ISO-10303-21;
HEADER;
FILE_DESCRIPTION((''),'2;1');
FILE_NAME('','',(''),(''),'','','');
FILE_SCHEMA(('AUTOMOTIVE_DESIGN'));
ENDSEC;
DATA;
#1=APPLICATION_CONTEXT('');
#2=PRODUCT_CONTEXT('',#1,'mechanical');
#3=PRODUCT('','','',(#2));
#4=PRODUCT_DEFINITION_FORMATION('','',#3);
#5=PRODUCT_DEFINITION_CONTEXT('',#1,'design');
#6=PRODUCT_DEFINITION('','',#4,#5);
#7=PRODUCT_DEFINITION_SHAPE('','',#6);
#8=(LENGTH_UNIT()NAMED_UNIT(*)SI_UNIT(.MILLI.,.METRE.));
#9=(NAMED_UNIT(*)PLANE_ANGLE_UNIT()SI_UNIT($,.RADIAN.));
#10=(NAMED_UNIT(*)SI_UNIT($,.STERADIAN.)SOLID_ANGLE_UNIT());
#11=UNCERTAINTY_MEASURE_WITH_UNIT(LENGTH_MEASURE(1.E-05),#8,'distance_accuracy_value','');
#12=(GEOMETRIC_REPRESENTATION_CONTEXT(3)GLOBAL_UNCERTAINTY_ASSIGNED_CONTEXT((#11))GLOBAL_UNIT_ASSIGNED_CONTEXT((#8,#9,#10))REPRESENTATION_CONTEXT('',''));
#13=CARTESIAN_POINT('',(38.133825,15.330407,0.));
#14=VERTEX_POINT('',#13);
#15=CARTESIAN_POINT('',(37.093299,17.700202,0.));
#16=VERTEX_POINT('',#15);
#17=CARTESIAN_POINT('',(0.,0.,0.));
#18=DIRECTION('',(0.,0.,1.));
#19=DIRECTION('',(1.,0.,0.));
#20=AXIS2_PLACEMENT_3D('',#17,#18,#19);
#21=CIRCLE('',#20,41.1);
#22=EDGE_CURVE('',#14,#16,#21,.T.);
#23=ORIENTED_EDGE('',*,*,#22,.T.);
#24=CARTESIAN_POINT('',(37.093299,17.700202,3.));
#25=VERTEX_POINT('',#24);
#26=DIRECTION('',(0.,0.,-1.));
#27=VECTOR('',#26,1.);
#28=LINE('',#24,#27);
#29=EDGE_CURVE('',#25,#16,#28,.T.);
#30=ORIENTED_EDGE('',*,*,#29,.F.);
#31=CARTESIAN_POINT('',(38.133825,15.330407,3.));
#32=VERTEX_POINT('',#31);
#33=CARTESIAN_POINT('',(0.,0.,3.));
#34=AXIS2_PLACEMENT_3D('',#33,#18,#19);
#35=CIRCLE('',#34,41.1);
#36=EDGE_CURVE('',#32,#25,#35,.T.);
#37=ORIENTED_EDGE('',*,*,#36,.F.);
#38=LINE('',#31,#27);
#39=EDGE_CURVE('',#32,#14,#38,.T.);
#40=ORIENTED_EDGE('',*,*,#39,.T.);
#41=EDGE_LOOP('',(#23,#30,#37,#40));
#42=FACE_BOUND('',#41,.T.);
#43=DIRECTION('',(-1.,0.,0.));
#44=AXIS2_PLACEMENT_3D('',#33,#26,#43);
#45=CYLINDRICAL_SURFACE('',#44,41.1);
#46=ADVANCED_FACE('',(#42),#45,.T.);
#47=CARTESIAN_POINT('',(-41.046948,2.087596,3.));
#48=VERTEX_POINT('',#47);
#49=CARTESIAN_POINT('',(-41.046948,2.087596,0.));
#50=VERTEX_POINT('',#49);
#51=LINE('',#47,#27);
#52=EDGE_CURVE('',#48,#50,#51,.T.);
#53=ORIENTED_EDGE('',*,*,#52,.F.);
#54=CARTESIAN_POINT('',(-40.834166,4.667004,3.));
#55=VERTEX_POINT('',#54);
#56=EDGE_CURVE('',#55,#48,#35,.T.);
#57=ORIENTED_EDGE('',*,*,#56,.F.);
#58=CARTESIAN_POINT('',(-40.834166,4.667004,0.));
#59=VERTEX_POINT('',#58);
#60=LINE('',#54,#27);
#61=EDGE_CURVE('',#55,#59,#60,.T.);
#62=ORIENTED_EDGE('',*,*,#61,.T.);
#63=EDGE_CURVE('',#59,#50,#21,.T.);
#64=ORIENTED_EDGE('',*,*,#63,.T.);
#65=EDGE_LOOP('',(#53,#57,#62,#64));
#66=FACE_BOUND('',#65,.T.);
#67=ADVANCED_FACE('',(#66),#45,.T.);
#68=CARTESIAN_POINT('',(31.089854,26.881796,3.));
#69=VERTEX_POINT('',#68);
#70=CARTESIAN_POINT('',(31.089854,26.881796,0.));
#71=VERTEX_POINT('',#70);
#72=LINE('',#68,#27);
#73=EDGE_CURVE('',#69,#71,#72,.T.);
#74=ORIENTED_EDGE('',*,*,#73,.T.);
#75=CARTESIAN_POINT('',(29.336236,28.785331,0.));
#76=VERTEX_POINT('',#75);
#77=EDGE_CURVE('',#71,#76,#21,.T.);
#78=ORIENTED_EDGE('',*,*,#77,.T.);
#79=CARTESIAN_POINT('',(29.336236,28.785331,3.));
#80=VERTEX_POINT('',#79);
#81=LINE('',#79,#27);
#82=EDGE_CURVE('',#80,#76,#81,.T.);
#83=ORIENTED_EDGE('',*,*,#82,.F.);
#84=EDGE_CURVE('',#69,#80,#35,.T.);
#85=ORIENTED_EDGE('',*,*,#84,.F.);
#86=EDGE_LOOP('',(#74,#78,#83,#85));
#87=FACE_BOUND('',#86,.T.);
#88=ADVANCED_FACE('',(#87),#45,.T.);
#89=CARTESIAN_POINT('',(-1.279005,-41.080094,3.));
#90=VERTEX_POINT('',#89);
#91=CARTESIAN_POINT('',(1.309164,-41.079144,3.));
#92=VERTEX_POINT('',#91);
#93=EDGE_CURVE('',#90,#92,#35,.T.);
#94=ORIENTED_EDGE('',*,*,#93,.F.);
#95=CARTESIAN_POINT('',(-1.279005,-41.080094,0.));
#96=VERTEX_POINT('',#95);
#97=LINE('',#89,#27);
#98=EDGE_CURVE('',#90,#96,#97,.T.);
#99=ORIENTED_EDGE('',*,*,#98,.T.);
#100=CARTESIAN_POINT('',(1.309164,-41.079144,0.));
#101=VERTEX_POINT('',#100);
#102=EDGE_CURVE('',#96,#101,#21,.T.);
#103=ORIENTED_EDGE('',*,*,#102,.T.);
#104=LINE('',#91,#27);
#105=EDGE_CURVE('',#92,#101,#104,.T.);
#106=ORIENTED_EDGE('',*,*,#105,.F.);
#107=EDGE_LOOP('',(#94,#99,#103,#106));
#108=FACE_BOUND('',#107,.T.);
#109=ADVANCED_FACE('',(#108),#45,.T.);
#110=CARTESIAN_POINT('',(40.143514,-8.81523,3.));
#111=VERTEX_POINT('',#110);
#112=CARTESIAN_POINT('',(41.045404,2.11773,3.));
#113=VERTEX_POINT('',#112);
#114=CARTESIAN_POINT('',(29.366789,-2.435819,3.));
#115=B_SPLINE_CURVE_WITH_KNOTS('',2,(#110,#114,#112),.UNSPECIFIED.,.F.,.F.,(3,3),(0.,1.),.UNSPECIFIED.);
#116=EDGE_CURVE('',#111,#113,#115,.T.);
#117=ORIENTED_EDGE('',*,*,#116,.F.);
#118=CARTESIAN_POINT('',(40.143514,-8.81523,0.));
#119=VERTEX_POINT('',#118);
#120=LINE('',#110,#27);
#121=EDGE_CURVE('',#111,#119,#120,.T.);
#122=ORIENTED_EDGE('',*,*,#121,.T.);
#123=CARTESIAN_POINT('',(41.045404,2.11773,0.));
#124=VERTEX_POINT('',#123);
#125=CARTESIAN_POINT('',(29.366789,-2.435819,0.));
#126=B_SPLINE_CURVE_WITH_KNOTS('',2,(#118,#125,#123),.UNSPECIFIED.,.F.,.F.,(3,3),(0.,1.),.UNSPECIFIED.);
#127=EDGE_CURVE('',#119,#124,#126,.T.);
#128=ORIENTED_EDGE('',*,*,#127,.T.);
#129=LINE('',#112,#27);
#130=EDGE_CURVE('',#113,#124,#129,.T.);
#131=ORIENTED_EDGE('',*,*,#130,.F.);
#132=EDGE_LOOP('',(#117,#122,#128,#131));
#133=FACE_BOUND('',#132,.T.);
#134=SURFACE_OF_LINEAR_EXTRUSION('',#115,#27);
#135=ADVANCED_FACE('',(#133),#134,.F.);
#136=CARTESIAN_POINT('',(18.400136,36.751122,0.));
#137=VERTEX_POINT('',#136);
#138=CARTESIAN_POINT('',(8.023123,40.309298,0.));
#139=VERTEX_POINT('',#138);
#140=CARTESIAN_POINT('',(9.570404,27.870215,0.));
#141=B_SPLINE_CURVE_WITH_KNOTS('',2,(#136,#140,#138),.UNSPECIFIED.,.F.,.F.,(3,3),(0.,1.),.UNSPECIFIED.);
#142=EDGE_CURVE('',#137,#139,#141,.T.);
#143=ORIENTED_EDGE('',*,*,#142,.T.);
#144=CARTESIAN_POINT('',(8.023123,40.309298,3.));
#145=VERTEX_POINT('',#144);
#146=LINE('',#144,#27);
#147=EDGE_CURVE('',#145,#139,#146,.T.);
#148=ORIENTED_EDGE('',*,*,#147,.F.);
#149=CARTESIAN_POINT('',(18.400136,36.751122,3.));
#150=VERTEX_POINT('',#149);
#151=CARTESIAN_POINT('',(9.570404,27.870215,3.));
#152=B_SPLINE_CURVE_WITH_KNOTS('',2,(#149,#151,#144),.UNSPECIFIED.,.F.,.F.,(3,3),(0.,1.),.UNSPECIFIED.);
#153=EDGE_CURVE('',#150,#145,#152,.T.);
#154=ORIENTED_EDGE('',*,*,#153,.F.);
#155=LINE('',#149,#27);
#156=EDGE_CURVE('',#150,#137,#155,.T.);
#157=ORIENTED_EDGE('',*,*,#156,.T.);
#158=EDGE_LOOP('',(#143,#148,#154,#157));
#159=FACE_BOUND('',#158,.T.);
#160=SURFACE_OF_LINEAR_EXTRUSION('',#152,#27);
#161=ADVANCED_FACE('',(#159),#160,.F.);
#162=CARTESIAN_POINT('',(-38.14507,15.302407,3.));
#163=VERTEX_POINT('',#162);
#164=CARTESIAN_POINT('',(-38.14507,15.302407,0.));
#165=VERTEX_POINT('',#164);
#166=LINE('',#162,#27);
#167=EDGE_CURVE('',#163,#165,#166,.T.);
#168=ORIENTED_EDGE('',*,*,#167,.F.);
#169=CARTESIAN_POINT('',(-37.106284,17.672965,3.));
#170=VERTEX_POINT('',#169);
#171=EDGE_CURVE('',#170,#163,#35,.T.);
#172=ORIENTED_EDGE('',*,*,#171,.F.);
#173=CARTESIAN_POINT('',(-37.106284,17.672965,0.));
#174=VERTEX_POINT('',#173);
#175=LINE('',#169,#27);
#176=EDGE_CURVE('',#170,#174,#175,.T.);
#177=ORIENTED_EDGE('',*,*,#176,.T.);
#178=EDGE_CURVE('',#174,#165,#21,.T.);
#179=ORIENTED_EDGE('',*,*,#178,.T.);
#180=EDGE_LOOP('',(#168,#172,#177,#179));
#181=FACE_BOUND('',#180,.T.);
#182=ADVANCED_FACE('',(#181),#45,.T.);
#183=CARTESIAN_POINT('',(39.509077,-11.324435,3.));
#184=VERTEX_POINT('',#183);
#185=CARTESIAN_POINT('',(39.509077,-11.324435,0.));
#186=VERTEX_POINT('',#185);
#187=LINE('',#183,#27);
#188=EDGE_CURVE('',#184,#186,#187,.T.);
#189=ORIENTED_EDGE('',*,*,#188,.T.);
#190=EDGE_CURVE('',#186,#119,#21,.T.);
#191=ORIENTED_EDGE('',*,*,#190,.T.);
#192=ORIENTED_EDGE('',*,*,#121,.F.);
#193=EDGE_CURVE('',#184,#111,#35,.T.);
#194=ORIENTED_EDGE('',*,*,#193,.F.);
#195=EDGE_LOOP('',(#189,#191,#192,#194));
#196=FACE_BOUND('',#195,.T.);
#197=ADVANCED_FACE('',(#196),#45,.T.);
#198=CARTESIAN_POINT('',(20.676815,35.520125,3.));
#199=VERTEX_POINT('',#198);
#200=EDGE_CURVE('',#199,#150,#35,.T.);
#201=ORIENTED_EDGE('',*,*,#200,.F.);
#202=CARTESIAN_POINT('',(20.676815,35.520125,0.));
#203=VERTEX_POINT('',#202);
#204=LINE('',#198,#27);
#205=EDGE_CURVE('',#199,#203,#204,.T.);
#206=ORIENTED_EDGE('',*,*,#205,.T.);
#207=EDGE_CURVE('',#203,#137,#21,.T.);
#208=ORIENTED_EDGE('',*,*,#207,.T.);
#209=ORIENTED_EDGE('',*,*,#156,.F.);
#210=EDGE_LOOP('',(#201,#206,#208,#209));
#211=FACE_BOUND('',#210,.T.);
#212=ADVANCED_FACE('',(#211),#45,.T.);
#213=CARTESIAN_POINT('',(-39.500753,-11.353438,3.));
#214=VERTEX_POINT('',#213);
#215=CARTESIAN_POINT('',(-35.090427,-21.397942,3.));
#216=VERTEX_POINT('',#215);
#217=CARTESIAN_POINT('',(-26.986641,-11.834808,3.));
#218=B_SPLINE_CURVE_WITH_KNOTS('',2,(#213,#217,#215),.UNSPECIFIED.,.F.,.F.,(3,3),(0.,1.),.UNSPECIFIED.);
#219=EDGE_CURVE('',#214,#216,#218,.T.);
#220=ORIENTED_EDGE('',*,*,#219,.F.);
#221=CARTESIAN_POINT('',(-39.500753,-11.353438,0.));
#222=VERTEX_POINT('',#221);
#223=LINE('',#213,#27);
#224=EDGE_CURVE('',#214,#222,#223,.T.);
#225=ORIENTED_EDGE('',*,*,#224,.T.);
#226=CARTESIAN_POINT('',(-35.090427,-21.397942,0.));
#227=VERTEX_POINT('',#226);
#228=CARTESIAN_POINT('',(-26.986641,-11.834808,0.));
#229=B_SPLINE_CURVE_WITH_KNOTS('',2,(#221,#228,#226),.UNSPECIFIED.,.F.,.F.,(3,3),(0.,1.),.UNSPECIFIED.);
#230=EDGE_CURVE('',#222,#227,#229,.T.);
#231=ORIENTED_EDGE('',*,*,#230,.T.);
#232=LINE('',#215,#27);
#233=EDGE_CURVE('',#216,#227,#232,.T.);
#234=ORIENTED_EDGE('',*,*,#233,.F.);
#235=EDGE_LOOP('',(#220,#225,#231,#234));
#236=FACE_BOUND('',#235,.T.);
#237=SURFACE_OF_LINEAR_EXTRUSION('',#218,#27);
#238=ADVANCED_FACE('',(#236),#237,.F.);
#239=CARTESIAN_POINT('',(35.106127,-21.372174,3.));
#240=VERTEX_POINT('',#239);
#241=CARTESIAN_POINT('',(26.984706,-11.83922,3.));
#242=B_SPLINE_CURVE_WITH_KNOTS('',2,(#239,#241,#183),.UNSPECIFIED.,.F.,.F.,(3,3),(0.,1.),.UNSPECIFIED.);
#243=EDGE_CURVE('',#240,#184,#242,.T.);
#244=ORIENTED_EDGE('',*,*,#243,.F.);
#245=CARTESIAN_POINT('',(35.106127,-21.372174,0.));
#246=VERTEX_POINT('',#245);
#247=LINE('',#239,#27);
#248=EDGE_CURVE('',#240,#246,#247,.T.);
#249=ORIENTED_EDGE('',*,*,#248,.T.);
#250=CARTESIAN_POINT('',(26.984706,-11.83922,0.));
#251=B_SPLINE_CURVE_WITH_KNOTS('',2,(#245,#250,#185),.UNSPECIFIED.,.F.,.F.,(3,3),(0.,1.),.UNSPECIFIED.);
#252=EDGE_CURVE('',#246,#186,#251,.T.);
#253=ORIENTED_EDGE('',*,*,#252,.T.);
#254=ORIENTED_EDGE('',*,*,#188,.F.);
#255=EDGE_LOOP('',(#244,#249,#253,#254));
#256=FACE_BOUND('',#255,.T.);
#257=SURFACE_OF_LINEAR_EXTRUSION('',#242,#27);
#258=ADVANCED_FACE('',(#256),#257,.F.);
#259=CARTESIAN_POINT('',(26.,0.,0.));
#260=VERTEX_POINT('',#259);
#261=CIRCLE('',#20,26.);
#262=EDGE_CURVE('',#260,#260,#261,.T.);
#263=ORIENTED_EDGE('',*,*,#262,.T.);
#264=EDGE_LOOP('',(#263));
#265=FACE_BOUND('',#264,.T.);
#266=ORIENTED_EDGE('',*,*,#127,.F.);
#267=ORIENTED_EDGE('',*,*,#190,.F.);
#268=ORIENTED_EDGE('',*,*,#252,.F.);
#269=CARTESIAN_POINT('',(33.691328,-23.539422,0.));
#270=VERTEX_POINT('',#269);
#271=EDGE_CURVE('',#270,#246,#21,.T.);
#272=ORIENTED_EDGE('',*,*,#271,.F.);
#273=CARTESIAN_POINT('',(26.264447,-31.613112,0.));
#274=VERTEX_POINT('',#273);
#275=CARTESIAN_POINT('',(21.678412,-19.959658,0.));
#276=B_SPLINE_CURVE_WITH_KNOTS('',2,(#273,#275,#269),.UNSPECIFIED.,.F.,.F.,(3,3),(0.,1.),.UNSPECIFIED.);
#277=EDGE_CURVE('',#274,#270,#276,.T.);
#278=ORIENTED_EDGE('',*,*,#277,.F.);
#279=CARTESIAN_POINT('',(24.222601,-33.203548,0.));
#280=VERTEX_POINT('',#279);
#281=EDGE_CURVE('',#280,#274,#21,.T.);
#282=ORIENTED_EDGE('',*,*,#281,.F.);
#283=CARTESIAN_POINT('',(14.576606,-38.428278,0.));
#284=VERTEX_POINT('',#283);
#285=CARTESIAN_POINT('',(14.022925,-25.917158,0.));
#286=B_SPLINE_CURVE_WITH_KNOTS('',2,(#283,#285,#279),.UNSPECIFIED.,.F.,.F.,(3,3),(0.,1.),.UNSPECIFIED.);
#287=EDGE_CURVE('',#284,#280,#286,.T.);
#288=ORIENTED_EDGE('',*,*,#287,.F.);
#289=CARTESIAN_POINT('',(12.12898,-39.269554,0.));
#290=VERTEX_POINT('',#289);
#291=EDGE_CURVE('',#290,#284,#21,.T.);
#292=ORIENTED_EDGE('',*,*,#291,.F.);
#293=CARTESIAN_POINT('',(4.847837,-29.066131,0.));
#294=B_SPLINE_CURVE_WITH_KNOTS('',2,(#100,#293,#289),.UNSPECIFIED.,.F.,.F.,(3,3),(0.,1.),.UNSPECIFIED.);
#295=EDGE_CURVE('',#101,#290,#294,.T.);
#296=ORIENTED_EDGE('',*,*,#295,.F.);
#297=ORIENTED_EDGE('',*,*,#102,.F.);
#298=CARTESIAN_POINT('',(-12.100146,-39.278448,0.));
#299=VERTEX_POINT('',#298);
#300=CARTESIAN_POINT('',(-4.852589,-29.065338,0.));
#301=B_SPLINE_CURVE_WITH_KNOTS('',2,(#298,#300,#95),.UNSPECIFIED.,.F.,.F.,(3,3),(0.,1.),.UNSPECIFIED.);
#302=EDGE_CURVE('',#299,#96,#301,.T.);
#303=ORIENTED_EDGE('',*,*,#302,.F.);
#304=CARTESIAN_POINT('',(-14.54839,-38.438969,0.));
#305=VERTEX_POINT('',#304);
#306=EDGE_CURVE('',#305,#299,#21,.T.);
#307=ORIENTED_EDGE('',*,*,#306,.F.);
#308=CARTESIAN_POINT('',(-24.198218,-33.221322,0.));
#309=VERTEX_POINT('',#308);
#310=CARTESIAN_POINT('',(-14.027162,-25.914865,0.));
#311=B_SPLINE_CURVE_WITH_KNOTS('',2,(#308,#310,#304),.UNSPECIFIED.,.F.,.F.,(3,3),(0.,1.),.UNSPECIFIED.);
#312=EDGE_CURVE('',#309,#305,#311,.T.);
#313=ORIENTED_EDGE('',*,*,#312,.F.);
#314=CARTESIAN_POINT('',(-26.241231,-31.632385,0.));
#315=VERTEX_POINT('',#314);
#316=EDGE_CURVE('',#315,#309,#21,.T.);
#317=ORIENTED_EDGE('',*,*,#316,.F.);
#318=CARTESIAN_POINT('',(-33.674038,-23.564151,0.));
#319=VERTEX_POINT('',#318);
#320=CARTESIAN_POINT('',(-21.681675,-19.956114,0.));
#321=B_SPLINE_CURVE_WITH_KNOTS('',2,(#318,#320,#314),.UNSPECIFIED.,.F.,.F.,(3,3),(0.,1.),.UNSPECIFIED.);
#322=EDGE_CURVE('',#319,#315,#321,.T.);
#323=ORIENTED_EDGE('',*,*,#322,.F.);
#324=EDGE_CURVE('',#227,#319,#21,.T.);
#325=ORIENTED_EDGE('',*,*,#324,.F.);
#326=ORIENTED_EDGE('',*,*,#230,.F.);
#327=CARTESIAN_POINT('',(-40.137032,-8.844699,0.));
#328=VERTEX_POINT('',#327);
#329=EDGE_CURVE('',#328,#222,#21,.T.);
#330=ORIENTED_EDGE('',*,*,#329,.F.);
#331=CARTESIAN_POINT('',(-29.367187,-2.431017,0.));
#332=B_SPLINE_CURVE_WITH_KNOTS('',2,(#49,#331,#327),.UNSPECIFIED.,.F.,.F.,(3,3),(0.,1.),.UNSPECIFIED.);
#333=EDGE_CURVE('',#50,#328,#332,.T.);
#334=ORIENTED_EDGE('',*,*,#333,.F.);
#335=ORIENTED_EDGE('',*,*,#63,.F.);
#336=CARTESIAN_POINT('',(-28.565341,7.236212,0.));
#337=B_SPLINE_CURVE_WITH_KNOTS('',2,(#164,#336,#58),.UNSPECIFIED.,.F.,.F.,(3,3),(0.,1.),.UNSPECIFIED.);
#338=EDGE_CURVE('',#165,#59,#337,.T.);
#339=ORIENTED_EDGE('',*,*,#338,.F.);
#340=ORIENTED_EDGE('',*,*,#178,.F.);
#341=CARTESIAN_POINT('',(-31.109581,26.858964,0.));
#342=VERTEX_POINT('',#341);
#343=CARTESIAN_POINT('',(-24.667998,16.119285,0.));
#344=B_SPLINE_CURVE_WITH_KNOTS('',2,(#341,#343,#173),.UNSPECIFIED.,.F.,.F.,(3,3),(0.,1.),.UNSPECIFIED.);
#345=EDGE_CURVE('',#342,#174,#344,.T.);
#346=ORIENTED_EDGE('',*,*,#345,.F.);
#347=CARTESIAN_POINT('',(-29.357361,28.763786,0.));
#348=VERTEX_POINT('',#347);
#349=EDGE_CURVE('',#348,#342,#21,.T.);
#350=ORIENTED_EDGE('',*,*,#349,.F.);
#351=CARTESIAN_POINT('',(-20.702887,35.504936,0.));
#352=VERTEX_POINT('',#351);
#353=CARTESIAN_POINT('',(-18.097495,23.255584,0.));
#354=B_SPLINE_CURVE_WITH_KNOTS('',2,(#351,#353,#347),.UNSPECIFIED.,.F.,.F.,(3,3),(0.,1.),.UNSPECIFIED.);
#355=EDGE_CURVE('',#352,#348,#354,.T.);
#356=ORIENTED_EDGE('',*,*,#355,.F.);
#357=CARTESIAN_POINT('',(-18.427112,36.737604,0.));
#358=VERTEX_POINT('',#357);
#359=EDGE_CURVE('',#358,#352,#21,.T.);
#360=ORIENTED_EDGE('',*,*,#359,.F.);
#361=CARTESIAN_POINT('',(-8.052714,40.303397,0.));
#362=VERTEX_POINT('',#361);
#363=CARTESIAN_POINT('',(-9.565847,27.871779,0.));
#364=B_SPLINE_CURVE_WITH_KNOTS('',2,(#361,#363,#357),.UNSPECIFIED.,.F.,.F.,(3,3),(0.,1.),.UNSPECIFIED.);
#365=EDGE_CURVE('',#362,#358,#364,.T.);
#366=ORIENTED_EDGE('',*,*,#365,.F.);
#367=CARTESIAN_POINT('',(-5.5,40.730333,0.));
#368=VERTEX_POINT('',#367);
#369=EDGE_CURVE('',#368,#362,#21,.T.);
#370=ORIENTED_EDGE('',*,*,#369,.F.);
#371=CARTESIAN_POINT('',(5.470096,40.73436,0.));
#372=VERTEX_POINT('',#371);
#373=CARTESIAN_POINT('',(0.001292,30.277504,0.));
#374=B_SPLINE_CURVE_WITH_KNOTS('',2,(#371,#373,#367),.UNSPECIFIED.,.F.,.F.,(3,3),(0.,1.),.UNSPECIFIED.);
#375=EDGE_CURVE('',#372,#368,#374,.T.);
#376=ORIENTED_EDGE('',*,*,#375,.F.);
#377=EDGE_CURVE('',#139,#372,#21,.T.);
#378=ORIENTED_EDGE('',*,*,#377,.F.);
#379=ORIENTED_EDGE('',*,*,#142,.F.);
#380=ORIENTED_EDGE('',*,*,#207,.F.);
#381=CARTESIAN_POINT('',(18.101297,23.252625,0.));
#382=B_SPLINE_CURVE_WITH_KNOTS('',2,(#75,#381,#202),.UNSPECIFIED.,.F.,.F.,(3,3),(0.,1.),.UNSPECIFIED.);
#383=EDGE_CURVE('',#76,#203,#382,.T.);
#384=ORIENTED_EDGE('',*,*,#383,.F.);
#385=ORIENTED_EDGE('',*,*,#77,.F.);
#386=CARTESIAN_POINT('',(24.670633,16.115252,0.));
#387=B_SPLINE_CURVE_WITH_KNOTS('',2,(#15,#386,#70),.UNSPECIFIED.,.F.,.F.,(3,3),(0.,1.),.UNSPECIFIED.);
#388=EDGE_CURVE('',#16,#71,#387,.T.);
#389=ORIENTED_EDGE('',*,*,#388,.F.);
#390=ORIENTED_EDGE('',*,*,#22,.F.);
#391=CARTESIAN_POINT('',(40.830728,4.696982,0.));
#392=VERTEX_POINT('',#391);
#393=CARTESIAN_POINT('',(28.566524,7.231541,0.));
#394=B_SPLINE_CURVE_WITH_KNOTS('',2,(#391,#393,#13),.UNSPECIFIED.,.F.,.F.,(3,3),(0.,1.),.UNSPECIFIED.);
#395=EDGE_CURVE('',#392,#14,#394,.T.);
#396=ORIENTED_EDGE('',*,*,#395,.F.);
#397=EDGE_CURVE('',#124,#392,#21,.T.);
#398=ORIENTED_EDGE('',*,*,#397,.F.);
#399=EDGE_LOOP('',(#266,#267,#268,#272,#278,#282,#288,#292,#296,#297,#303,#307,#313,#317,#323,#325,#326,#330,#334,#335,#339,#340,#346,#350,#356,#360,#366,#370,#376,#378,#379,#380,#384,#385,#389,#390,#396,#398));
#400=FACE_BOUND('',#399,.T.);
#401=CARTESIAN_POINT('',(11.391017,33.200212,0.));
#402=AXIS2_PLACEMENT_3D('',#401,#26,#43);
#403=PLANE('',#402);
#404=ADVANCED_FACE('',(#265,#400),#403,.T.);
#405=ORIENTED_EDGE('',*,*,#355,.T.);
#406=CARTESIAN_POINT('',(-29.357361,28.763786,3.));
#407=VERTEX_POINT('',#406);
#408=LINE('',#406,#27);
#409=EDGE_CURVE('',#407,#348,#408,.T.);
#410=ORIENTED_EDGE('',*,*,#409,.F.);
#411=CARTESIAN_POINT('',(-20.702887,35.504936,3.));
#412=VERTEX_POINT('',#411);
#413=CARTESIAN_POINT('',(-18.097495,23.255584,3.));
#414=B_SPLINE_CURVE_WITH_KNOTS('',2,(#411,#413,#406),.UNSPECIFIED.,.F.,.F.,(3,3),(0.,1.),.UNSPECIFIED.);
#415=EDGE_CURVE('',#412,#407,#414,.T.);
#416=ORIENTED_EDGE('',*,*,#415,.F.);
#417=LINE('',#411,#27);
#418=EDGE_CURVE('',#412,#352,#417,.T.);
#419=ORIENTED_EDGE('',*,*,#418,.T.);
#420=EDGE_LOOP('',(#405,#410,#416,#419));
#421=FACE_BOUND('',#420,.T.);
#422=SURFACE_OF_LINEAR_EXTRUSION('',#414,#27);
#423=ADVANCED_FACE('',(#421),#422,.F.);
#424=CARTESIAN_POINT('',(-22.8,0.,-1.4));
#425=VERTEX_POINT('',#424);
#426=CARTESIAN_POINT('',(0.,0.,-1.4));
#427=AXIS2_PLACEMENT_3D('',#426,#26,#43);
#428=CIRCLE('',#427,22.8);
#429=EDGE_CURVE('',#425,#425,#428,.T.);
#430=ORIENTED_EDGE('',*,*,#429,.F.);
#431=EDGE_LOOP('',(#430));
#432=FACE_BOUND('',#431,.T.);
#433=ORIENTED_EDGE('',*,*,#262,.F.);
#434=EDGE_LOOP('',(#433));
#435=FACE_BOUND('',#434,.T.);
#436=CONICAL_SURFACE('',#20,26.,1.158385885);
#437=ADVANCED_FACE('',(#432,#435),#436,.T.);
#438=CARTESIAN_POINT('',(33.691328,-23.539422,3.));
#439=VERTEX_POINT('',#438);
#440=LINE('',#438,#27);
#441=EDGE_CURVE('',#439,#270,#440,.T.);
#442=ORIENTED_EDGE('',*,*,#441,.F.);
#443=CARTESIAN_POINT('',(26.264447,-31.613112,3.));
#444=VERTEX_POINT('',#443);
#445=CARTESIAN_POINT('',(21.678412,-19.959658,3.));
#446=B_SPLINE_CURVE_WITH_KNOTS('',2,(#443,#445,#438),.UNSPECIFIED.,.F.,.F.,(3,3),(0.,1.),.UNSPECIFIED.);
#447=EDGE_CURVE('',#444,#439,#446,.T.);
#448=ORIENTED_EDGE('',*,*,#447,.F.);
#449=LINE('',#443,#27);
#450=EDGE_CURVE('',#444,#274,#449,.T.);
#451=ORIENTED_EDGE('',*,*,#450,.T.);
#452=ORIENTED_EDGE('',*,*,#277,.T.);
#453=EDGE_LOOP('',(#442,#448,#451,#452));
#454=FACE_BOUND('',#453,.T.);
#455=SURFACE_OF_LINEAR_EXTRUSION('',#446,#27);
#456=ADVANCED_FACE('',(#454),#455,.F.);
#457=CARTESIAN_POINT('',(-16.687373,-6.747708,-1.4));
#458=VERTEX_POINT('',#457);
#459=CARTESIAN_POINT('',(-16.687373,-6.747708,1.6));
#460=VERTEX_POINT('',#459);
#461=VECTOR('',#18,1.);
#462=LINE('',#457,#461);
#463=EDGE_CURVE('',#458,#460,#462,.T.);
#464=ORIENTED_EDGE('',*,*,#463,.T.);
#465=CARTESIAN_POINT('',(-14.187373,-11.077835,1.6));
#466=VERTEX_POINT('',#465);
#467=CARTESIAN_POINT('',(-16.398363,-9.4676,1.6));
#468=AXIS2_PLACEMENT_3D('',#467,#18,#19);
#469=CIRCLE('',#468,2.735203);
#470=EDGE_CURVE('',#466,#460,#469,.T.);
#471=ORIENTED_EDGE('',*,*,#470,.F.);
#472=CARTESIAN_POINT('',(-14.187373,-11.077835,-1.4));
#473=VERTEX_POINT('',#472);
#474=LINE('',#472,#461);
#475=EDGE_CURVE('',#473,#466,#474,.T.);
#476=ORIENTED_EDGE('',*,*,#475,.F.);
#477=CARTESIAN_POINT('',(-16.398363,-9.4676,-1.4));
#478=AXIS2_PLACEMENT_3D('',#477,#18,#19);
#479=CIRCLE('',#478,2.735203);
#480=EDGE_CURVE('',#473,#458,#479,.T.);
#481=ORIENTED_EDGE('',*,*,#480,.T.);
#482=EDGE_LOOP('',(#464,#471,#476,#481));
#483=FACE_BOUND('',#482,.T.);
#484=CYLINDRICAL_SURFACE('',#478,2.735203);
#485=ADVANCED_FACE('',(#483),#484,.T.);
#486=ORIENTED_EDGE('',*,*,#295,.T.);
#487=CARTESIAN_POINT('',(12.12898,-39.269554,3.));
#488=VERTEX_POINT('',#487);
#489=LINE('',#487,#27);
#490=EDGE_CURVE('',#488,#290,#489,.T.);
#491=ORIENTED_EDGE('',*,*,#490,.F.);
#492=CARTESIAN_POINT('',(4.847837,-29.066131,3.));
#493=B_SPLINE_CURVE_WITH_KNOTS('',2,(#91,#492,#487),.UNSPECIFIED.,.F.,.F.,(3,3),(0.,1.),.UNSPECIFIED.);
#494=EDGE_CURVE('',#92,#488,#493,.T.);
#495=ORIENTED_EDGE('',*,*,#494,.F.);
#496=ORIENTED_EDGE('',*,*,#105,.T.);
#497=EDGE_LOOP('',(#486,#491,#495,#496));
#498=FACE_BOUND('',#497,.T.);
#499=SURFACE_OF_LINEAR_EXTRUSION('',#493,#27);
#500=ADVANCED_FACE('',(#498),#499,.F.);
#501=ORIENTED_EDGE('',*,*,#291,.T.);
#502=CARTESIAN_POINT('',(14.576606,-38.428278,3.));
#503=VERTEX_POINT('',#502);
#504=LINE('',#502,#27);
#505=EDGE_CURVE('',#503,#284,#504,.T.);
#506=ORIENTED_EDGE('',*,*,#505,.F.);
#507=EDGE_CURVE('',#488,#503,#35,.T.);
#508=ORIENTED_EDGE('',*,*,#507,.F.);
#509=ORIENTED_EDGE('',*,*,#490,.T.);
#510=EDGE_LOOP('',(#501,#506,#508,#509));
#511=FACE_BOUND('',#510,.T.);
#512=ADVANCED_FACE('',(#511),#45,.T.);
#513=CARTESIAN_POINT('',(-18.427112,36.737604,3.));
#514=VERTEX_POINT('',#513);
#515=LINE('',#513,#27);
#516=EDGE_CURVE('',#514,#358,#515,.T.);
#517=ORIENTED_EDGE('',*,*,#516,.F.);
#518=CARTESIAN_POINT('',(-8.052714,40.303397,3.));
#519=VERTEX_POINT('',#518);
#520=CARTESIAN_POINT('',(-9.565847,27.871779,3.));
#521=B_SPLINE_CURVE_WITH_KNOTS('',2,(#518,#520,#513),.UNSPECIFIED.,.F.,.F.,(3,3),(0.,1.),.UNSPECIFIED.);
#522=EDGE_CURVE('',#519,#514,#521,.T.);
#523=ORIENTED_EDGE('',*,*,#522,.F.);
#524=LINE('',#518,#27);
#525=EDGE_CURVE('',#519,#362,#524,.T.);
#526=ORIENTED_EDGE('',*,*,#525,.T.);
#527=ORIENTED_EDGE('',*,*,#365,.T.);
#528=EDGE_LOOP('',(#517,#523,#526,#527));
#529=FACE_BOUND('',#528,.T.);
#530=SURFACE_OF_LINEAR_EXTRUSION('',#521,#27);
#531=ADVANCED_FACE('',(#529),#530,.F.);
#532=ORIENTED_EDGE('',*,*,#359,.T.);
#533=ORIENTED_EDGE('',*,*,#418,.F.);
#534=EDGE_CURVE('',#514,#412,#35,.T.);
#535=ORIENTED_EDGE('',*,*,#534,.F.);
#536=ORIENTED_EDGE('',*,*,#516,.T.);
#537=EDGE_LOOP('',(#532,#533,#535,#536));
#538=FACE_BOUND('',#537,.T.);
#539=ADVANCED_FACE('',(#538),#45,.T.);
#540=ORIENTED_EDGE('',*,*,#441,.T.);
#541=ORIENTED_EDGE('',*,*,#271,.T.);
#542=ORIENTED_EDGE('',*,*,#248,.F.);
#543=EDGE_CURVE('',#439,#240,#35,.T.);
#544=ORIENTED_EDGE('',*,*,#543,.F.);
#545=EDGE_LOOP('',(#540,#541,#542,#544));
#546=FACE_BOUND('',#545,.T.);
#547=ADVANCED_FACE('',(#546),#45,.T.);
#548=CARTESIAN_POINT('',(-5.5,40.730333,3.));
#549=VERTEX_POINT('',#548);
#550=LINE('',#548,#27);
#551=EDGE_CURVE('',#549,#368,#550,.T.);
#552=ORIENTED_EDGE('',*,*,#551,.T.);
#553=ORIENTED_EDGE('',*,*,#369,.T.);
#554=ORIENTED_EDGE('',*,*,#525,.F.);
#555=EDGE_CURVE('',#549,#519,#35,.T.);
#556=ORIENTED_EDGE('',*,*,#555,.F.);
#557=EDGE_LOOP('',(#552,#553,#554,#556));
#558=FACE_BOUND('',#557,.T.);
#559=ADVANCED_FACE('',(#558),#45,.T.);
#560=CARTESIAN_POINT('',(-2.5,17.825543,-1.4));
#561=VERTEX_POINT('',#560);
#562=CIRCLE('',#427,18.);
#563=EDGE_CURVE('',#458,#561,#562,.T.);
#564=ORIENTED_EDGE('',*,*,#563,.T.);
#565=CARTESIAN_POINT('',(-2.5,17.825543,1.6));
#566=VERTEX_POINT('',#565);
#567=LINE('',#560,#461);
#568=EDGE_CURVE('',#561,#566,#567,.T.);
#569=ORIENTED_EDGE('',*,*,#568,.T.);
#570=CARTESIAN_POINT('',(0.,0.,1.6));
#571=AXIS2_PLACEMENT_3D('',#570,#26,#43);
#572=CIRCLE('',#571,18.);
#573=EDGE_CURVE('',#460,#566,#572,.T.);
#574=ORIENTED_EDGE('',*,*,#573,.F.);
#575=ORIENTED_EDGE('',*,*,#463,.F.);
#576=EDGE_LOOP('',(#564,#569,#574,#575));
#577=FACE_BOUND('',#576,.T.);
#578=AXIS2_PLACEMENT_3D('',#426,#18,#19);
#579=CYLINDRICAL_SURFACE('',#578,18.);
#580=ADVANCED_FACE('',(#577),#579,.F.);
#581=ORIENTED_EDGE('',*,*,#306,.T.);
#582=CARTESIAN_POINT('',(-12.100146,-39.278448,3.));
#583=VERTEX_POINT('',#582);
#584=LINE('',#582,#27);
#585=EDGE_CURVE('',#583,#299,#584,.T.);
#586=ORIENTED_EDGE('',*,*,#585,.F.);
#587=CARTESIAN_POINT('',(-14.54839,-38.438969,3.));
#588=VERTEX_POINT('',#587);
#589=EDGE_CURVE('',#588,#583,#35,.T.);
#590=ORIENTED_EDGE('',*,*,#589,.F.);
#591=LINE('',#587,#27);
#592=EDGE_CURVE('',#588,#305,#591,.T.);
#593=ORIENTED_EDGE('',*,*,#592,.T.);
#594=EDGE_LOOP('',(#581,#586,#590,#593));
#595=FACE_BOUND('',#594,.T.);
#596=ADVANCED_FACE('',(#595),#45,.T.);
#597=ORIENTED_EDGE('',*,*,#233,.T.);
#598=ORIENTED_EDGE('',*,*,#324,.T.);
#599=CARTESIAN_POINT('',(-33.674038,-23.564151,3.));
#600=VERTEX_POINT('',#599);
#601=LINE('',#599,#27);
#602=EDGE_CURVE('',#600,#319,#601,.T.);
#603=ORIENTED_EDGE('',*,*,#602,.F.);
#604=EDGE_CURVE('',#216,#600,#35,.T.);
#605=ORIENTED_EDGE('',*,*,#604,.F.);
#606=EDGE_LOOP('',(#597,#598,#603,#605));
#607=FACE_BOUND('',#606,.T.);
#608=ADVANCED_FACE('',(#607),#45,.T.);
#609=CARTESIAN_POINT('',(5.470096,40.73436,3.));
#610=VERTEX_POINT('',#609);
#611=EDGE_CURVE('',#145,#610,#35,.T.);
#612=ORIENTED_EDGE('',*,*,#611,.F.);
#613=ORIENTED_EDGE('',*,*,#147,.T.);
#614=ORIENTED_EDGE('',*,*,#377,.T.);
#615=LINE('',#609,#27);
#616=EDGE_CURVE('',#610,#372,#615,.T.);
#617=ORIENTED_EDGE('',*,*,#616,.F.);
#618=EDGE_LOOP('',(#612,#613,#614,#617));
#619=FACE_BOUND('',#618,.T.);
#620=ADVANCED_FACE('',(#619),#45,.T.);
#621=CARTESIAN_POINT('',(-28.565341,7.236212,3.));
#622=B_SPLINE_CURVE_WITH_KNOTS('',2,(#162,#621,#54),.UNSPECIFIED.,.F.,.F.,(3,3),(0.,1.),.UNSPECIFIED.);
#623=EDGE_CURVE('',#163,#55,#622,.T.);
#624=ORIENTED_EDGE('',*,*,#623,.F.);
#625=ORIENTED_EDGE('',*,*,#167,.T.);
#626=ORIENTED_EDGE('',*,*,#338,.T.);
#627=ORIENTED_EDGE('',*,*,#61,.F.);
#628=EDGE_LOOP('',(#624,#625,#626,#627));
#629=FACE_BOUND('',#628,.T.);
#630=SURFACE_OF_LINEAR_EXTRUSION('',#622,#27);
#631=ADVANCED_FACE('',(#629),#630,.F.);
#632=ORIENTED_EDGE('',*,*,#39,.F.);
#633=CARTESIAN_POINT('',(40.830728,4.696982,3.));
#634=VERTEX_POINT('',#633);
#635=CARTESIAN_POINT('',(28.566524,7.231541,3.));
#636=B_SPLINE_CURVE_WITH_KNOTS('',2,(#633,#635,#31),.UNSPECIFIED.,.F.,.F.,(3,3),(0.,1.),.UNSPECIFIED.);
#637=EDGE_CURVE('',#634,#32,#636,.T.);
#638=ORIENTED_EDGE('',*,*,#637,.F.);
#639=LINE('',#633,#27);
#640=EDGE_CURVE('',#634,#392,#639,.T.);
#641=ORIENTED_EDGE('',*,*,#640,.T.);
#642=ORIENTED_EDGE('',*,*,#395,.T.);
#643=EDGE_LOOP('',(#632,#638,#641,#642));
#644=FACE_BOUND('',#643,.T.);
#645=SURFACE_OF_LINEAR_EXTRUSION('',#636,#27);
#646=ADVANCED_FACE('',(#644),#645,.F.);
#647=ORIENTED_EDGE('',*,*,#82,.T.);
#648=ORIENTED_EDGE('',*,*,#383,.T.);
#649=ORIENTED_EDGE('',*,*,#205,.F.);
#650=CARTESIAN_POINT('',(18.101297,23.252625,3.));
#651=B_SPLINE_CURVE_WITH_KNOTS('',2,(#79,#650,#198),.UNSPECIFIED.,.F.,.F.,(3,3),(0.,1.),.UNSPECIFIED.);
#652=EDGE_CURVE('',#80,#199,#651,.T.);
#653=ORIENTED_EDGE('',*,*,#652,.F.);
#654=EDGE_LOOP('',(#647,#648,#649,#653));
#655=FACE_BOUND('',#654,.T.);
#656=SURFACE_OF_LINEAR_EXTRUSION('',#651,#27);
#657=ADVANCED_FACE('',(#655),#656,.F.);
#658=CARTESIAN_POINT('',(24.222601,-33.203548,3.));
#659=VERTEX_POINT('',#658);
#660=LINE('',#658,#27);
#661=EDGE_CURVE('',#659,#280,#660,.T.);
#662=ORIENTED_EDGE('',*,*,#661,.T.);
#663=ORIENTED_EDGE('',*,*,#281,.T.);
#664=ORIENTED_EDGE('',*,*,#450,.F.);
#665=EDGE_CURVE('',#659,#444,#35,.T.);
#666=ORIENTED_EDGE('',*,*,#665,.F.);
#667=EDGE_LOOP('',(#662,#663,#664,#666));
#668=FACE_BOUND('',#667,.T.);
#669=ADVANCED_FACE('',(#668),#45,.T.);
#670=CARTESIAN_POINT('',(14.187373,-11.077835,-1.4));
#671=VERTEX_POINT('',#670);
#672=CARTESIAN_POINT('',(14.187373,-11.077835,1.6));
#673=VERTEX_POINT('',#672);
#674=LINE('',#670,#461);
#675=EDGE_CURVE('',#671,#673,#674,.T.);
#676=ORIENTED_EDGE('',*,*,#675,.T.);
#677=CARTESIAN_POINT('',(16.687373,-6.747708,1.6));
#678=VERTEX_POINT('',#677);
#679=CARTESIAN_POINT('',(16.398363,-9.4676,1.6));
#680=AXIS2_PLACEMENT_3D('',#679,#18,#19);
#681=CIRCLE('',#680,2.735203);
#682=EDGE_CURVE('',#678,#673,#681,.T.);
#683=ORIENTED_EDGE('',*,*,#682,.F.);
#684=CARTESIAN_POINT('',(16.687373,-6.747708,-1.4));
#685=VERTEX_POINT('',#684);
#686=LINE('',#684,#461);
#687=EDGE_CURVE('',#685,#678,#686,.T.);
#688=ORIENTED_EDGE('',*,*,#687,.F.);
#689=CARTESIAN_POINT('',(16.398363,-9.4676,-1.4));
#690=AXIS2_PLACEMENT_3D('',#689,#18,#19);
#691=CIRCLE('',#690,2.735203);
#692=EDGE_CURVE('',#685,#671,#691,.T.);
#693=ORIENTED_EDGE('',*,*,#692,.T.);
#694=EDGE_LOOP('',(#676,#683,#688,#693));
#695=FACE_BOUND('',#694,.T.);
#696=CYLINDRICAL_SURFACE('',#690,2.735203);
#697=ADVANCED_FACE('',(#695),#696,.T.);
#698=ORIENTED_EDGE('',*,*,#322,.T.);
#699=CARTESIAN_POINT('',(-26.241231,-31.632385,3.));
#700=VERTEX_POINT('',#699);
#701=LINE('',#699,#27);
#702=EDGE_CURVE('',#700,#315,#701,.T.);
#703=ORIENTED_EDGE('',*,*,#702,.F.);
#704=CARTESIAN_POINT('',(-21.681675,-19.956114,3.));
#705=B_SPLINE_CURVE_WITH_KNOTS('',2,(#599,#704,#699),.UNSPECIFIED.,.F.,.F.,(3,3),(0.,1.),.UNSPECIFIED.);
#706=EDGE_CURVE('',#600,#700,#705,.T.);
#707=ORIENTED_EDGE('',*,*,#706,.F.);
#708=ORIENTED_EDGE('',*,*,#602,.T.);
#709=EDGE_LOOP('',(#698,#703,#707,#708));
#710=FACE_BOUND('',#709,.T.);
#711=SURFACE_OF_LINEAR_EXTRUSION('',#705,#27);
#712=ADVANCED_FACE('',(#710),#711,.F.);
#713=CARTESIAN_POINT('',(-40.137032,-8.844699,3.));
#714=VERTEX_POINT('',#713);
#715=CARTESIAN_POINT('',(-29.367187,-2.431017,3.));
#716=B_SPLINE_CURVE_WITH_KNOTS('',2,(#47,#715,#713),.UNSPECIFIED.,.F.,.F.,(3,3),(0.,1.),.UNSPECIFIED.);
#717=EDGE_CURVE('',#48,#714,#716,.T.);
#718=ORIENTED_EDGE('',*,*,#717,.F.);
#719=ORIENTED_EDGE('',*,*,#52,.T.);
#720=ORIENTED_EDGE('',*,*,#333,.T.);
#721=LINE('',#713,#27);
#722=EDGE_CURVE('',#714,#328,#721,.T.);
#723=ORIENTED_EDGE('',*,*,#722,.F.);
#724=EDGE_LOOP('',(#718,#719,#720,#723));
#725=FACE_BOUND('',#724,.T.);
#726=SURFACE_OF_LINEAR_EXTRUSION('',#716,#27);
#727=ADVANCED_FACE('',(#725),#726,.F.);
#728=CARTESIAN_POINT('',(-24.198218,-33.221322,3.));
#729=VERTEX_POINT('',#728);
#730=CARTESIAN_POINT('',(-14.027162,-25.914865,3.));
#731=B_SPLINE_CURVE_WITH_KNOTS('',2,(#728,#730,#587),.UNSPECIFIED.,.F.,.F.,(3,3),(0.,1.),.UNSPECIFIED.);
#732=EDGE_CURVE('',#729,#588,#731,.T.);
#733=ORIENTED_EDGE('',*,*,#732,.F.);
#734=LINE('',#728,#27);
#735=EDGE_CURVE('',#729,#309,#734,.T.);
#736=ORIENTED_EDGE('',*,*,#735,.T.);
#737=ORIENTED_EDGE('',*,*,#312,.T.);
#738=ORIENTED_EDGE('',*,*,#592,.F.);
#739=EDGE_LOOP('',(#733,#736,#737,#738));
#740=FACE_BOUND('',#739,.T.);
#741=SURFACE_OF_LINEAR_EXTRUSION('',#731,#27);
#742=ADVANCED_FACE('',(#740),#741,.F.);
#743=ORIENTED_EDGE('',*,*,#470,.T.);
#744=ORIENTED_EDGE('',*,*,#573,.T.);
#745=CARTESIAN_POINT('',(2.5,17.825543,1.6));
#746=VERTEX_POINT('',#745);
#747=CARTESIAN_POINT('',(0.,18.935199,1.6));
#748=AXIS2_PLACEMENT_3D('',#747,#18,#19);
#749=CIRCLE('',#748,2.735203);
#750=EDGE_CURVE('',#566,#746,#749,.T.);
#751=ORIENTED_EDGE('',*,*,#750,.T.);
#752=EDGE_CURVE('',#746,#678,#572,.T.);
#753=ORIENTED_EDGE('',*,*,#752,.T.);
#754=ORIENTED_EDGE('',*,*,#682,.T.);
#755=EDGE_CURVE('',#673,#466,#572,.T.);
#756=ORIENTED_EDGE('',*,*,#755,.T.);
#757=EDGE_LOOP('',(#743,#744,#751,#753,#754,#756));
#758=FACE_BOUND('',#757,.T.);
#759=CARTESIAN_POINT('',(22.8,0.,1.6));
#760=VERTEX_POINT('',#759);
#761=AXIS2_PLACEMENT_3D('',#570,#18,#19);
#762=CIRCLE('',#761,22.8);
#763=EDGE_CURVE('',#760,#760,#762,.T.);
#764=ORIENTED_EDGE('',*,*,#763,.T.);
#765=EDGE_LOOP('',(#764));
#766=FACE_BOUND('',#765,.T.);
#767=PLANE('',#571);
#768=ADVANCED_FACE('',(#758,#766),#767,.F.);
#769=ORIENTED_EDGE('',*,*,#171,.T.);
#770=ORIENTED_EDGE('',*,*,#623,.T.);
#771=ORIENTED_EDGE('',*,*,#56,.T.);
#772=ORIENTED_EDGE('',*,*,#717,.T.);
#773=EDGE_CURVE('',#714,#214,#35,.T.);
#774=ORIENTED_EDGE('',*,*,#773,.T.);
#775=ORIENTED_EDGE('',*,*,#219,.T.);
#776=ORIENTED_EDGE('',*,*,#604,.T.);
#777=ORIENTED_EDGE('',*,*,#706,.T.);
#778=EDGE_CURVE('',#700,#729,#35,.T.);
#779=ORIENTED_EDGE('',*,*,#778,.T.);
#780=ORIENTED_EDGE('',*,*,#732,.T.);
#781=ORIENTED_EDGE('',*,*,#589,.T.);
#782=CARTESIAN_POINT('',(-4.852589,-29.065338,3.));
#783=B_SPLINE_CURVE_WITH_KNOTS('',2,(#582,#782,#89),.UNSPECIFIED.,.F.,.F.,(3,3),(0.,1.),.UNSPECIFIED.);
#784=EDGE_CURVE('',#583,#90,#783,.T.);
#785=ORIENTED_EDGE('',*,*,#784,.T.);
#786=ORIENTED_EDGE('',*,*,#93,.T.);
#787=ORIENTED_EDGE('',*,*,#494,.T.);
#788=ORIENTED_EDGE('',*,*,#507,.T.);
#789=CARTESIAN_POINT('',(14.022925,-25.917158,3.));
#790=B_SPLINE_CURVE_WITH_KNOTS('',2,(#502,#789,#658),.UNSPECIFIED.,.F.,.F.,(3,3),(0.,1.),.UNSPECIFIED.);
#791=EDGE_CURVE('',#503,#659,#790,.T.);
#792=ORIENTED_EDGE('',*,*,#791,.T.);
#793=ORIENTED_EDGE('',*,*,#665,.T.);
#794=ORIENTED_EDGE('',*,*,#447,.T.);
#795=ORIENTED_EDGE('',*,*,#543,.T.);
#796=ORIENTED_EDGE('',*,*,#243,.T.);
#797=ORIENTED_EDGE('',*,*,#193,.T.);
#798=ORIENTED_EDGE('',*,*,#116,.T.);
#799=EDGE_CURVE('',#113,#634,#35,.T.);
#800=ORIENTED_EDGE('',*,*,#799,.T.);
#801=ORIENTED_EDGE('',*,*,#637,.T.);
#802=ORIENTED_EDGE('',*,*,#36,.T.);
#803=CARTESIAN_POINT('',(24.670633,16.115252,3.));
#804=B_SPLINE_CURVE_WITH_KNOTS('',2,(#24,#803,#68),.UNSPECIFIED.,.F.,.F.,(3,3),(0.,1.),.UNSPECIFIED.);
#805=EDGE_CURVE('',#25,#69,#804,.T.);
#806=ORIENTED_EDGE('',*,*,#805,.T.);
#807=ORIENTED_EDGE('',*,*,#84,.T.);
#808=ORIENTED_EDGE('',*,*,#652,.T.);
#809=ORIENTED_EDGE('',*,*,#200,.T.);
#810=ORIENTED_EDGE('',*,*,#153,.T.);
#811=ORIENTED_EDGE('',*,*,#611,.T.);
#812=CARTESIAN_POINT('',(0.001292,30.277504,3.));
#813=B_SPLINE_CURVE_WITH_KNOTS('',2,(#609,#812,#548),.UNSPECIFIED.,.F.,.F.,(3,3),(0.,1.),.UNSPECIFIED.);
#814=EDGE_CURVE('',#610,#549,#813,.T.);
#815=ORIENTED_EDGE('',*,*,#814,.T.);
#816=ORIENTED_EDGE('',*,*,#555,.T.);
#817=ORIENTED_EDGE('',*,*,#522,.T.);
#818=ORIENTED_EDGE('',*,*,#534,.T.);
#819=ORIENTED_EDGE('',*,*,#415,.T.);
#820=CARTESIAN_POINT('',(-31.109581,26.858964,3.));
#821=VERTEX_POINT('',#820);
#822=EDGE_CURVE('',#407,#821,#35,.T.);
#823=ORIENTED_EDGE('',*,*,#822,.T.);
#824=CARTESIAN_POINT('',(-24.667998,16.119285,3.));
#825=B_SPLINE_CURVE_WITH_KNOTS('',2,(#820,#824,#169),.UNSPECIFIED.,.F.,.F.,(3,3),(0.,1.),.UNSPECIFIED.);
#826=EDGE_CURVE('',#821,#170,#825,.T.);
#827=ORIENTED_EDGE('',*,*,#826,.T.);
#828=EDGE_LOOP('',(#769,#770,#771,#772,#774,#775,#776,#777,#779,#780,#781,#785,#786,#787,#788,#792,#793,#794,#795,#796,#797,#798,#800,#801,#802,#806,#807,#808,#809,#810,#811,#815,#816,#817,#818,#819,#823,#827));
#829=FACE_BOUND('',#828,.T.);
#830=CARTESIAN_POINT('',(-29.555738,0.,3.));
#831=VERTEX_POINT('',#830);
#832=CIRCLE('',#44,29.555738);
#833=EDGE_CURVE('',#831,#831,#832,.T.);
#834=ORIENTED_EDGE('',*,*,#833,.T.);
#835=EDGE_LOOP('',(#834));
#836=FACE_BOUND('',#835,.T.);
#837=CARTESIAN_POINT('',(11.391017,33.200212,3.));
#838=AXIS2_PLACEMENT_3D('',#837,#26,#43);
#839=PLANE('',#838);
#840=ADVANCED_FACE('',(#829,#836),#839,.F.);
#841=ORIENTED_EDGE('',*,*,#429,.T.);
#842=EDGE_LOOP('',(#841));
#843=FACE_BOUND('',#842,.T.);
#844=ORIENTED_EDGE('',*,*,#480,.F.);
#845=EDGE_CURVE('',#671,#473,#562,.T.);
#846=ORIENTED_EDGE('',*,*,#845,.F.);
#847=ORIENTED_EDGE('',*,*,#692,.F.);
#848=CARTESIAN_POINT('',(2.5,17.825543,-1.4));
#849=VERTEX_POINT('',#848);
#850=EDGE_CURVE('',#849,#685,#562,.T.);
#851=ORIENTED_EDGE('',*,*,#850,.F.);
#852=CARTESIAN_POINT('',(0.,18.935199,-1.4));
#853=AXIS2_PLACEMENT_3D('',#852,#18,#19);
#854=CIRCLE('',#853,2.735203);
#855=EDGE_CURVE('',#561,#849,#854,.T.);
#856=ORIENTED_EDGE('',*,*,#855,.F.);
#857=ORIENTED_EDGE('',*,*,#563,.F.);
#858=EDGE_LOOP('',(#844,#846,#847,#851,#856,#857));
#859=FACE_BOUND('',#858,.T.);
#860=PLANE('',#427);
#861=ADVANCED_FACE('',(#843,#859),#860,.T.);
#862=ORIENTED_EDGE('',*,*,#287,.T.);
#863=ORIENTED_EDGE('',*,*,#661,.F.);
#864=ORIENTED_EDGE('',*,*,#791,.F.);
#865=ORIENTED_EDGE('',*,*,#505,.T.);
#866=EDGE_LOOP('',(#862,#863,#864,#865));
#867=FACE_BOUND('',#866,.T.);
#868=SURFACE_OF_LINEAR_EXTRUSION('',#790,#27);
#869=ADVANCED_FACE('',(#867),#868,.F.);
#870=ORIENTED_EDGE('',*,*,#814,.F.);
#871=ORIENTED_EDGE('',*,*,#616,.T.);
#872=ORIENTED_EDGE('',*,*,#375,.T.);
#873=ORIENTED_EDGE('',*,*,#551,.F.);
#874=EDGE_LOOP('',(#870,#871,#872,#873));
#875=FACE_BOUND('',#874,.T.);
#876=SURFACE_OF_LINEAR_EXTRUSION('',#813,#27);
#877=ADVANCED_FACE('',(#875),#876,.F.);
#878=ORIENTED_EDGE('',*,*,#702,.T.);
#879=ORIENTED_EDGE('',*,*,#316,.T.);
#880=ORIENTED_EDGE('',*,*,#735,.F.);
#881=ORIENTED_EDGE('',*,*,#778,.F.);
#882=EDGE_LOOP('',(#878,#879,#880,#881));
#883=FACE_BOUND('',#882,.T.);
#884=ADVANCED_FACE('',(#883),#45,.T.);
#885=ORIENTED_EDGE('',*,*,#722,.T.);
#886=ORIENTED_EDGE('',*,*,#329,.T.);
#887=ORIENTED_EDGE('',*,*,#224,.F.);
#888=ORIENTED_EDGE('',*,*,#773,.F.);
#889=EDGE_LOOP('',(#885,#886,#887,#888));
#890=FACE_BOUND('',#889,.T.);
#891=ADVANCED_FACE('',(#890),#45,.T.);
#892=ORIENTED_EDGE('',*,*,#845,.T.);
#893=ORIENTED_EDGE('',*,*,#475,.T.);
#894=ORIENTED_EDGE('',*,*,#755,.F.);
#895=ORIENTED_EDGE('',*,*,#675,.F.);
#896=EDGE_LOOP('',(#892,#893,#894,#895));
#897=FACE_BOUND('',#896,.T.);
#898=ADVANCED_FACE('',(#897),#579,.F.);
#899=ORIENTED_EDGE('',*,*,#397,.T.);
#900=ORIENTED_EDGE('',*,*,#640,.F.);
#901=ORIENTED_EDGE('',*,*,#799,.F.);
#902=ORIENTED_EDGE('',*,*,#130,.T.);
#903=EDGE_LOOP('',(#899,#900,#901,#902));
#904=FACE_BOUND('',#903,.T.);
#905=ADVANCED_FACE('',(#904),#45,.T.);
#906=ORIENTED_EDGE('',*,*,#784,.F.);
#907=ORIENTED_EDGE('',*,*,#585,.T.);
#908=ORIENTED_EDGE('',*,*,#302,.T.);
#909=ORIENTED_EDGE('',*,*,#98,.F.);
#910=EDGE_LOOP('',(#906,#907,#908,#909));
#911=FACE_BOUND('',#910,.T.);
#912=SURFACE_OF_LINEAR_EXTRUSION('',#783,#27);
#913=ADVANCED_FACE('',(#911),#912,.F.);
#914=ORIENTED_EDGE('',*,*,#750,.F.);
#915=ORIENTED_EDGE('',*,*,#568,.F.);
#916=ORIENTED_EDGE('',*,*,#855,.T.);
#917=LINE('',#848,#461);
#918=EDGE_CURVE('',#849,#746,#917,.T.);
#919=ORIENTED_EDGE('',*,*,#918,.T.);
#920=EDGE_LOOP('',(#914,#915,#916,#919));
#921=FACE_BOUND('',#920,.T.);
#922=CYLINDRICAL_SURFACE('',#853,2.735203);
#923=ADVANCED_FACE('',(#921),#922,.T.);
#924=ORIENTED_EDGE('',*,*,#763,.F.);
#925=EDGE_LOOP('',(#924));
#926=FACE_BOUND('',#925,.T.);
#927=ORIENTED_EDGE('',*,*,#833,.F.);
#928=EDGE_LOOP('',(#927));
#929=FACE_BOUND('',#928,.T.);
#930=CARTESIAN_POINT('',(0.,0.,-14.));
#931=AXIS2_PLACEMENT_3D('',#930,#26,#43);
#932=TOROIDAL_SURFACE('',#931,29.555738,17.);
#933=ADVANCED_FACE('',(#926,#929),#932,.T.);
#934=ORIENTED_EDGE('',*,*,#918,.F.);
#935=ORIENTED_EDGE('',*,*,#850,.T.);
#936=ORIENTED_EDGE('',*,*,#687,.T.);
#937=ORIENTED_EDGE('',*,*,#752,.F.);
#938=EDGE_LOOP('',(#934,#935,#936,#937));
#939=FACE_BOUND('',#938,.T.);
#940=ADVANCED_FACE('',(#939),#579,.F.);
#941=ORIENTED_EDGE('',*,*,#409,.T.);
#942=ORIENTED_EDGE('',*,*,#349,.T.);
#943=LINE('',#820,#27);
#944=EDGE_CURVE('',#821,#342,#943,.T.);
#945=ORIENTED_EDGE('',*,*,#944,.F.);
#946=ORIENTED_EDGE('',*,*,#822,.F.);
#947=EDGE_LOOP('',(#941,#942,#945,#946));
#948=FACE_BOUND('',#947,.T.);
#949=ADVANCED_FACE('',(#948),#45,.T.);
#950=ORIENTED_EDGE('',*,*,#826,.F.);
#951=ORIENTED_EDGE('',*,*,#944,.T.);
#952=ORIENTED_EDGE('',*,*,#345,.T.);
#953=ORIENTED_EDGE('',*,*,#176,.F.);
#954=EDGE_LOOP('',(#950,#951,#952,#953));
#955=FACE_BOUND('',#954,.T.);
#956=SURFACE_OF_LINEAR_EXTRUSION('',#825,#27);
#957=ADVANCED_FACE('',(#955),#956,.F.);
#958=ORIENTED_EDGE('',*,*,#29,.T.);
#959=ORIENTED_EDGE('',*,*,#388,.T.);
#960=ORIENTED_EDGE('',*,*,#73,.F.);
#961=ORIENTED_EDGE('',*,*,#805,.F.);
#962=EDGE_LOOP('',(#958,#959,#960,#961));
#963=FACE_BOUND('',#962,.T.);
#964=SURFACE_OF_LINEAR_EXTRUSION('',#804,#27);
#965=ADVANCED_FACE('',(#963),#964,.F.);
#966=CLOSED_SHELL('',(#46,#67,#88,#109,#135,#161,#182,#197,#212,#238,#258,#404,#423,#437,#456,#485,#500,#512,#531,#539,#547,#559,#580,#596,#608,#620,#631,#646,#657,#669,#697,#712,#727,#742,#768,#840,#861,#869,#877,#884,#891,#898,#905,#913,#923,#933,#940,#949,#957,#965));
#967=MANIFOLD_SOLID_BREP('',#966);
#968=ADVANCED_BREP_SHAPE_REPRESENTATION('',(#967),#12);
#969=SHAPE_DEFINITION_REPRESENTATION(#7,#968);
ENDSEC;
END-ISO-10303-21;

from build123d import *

# Parameters (mm, degrees)
SKETCH_1_R      = 26
EXTRUDE_1_DEPTH = 3
SKETCH_2_R      = 22.8
EXTRUDE_2_DEPTH = 3
FILLET_8_R      = 17


with BuildPart() as part:
    # Эскиз1 → Вытянуть1 (new body)
    with BuildSketch(Plane.XY):
        with BuildLine():
            ThreePointArc((-5.5, 40.730332677), (-6.779718382, 40.536963609), (-8.052713795, 40.303396886))
            add(Edge.make_bspline(
                [(-18.42711223, 36.737603826), (-9.565846889, 27.871779004), (-8.052713795, 40.303396886)],
                knots=[0, 0, 0, 1, 1, 1], degree=2))
            ThreePointArc((-18.42711223, 36.737603826), (-19.574705107, 36.139188148), (-20.702887125, 35.504935779))
            add(Edge.make_bspline(
                [(-29.357360924, 28.763785557), (-18.097494767, 23.255583732), (-20.702887125, 35.504935779)],
                knots=[0, 0, 0, 1, 1, 1], degree=2))
            ThreePointArc((-29.357360924, 28.763785557), (-30.2484688, 27.825170893), (-31.109581398, 26.858963965))
            add(Edge.make_bspline(
                [(-37.106284036, 17.672964807), (-24.667998276, 16.119285114), (-31.109581398, 26.858963965)],
                knots=[0, 0, 0, 1, 1, 1], degree=2))
            ThreePointArc((-37.106284036, 17.672964807), (-37.644341546, 16.49586462), (-38.145069811, 15.302406645))
            add(Edge.make_bspline(
                [(-40.834165508, 4.667004096), (-28.565341408, 7.236211838), (-38.145069811, 15.302406645)],
                knots=[0, 0, 0, 1, 1, 1], degree=2))
            ThreePointArc((-40.834165508, 4.667004096), (-40.960865773, 3.378975456), (-41.046948028, 2.087596124))
            add(Edge.make_bspline(
                [(-40.137031541, -8.844698925), (-29.367186562, -2.431017271), (-41.046948028, 2.087596124)],
                knots=[0, 0, 0, 1, 1, 1], degree=2))
            ThreePointArc((-40.137031541, -8.844698925), (-39.83864462, -10.104078129), (-39.500752518, -11.353437829))
            add(Edge.make_bspline(
                [(-35.090427416, -21.397941578), (-26.986641373, -11.834807939), (-39.500752518, -11.353437829)],
                knots=[0, 0, 0, 1, 1, 1], degree=2))
            ThreePointArc((-35.090427416, -21.397941578), (-34.399288162, -22.492198068), (-33.674037554, -23.564150627))
            add(Edge.make_bspline(
                [(-26.241230996, -31.632385237), (-21.68167485, -19.95611353), (-33.674037554, -23.564150627)],
                knots=[0, 0, 0, 1, 1, 1], degree=2))
            ThreePointArc((-26.241230996, -31.632385237), (-25.232235072, -32.442939344), (-24.198218116, -33.221322069))
            add(Edge.make_bspline(
                [(-14.548390024, -38.438969129), (-14.027162432, -25.91486457), (-24.198218116, -33.221322069)],
                knots=[0, 0, 0, 1, 1, 1], degree=2))
            ThreePointArc((-14.548390024, -38.438969129), (-13.330877794, -38.877984737), (-12.10014627, -39.278447783))
            add(Edge.make_bspline(
                [(-1.27900525, -41.080094274), (-4.85258931, -29.065337922), (-12.10014627, -39.278447783)],
                knots=[0, 0, 0, 1, 1, 1], degree=2))
            ThreePointArc((-1.27900525, -41.080094274), (0.015086944, -41.099997231), (1.309164177, -41.079144212))
            add(Edge.make_bspline(
                [(12.128979588, -39.269553781), (4.84783716, -29.066130916), (1.309164177, -41.079144212)],
                knots=[0, 0, 0, 1, 1, 1], degree=2))
            ThreePointArc((12.128979588, -39.269553781), (13.359416777, -38.868187292), (14.576606372, -38.428277956))
            add(Edge.make_bspline(
                [(24.222601287, -33.203547806), (14.022925251, -25.917157617), (14.576606372, -38.428277956)],
                knots=[0, 0, 0, 1, 1, 1], degree=2))
            ThreePointArc((24.222601287, -33.203547806), (25.256046509, -32.424406158), (26.264447087, -31.613111508))
            add(Edge.make_bspline(
                [(33.691328284, -23.53942222), (21.678411803, -19.959658145), (26.264447087, -31.613111508)],
                knots=[0, 0, 0, 1, 1, 1], degree=2))
            ThreePointArc((33.691328284, -23.53942222), (34.415791714, -22.466937501), (35.106127425, -21.3721739))
            add(Edge.make_bspline(
                [(39.509077087, -11.324434984), (26.984706061, -11.839220006), (35.106127425, -21.3721739)],
                knots=[0, 0, 0, 1, 1, 1], degree=2))
            ThreePointArc((39.509077087, -11.324434984), (39.846051872, -10.074827555), (40.143514129, -8.815229627))
            add(Edge.make_bspline(
                [(41.045404341, 2.117730498), (29.366788706, -2.435818675), (40.143514129, -8.815229627)],
                knots=[0, 0, 0, 1, 1, 1], degree=2))
            ThreePointArc((41.045404341, 2.117730498), (40.958374033, 3.409046284), (40.830728186, 4.696981559))
            add(Edge.make_bspline(
                [(38.13382515, 15.330407021), (28.566524123, 7.231541404), (40.830728186, 4.696981559)],
                knots=[0, 0, 0, 1, 1, 1], degree=2))
            ThreePointArc((38.13382515, 15.330407021), (37.632220833, 16.523497062), (37.093299291, 17.700201912))
            add(Edge.make_bspline(
                [(31.089854296, 26.881796068), (24.670633395, 16.115251764), (37.093299291, 17.700201912)],
                knots=[0, 0, 0, 1, 1, 1], degree=2))
            ThreePointArc((31.089854296, 26.881796068), (30.228032583, 27.847370544), (29.336235855, 28.785330741))
            add(Edge.make_bspline(
                [(20.676815321, 35.520125397), (18.101296735, 23.252624541), (29.336235855, 28.785330741)],
                knots=[0, 0, 0, 1, 1, 1], degree=2))
            ThreePointArc((20.676815321, 35.520125397), (19.548167965, 36.153549331), (18.400136066, 36.751122333))
            add(Edge.make_bspline(
                [(8.023122571, 40.309297987), (9.570403703, 27.870214648), (18.400136066, 36.751122333)],
                knots=[0, 0, 0, 1, 1, 1], degree=2))
            ThreePointArc((8.023122571, 40.309297987), (6.749956027, 40.541930068), (5.470096027, 40.734359569))
            add(Edge.make_bspline(
                [(-5.5, 40.730332677), (0.001292393, 30.277504211), (5.470096027, 40.734359569)],
                knots=[0, 0, 0, 1, 1, 1], degree=2))
        make_face()
        Circle(SKETCH_1_R, mode=Mode.SUBTRACT)
    extrude(amount=EXTRUDE_1_DEPTH)



with BuildPart() as body_2:
    # Эскиз2 → Вытянуть2 (new body)
    with BuildSketch(Plane(origin=(0, 0, 1.6), x_dir=(-1, 0, 0), z_dir=(0, 0, -1))):
        Circle(SKETCH_2_R)
        with BuildLine():
            ThreePointArc((16.687373481, -6.747708226), (15.588457268, 9), (2.5, 17.82554347))
            ThreePointArc((2.5, 17.82554347), (0, 16.199996074), (-2.5, 17.82554347))
            ThreePointArc((-2.5, 17.82554347), (-15.588457268, 9), (-16.687373481, -6.747708226))
            ThreePointArc((-16.687373481, -6.747708226), (-14.029608141, -8.099998037), (-14.187373481, -11.077835244))
            ThreePointArc((-14.187373481, -11.077835244), (0, -18), (14.187373481, -11.077835244))
            ThreePointArc((14.187373481, -11.077835244), (14.029608141, -8.099998037), (16.687373481, -6.747708226))
        make_face(mode=Mode.SUBTRACT)
    extrude(amount=EXTRUDE_2_DEPTH)


with BuildPart() as part_1:
    add(part.part)

    add(body_2.part)  # Повернуть1 merges body 2
    # Эскиз18 → Повернуть1 (revolve)
    with BuildSketch(Plane(origin=(0, 0, 0), x_dir=(1, 0, 0), z_dir=(0, 1, 0))):
        Polygon((26, -3), (22.8, -1.6), (22.8, 1.4), (26, 0), align=None)
    revolve(axis=Axis((0, 0, 0), (0, 0, -1)))

    # Скругление8
    # the kernel refuses this fillet: 17 mm, written as the material it takes off along each edge
    with BuildSketch(Plane(origin=(0, 0, 3), x_dir=(1, 0, 0), z_dir=(0, -1, 0))) as fillet_8_piece_1_section:
        with BuildLine():
            CenterArc((26 + FILLET_8_R * 0.209178456653, -FILLET_8_R), FILLET_8_R, 90, 23.629377731)
            Line((26 - FILLET_8_R * 0.191640377366, -FILLET_8_R * 0.0838426650978), (26, 0))
            Line((26, 0), (26 + FILLET_8_R * 0.209178456653, 0))
        make_face()
    fillet_8_piece_1 = revolve(axis=Axis((0, 0, 3), (0, 0, 1)), mode=Mode.PRIVATE)
    fillet_8_piece_1 = split(fillet_8_piece_1, bisect_by=Plane(origin=(-26.08987022, 0, 1.6), z_dir=(0, 0, 1)), keep=Keep.TOP, mode=Mode.PRIVATE)
    add(fillet_8_piece_1, mode=Mode.SUBTRACT)


solid = part_1.part
